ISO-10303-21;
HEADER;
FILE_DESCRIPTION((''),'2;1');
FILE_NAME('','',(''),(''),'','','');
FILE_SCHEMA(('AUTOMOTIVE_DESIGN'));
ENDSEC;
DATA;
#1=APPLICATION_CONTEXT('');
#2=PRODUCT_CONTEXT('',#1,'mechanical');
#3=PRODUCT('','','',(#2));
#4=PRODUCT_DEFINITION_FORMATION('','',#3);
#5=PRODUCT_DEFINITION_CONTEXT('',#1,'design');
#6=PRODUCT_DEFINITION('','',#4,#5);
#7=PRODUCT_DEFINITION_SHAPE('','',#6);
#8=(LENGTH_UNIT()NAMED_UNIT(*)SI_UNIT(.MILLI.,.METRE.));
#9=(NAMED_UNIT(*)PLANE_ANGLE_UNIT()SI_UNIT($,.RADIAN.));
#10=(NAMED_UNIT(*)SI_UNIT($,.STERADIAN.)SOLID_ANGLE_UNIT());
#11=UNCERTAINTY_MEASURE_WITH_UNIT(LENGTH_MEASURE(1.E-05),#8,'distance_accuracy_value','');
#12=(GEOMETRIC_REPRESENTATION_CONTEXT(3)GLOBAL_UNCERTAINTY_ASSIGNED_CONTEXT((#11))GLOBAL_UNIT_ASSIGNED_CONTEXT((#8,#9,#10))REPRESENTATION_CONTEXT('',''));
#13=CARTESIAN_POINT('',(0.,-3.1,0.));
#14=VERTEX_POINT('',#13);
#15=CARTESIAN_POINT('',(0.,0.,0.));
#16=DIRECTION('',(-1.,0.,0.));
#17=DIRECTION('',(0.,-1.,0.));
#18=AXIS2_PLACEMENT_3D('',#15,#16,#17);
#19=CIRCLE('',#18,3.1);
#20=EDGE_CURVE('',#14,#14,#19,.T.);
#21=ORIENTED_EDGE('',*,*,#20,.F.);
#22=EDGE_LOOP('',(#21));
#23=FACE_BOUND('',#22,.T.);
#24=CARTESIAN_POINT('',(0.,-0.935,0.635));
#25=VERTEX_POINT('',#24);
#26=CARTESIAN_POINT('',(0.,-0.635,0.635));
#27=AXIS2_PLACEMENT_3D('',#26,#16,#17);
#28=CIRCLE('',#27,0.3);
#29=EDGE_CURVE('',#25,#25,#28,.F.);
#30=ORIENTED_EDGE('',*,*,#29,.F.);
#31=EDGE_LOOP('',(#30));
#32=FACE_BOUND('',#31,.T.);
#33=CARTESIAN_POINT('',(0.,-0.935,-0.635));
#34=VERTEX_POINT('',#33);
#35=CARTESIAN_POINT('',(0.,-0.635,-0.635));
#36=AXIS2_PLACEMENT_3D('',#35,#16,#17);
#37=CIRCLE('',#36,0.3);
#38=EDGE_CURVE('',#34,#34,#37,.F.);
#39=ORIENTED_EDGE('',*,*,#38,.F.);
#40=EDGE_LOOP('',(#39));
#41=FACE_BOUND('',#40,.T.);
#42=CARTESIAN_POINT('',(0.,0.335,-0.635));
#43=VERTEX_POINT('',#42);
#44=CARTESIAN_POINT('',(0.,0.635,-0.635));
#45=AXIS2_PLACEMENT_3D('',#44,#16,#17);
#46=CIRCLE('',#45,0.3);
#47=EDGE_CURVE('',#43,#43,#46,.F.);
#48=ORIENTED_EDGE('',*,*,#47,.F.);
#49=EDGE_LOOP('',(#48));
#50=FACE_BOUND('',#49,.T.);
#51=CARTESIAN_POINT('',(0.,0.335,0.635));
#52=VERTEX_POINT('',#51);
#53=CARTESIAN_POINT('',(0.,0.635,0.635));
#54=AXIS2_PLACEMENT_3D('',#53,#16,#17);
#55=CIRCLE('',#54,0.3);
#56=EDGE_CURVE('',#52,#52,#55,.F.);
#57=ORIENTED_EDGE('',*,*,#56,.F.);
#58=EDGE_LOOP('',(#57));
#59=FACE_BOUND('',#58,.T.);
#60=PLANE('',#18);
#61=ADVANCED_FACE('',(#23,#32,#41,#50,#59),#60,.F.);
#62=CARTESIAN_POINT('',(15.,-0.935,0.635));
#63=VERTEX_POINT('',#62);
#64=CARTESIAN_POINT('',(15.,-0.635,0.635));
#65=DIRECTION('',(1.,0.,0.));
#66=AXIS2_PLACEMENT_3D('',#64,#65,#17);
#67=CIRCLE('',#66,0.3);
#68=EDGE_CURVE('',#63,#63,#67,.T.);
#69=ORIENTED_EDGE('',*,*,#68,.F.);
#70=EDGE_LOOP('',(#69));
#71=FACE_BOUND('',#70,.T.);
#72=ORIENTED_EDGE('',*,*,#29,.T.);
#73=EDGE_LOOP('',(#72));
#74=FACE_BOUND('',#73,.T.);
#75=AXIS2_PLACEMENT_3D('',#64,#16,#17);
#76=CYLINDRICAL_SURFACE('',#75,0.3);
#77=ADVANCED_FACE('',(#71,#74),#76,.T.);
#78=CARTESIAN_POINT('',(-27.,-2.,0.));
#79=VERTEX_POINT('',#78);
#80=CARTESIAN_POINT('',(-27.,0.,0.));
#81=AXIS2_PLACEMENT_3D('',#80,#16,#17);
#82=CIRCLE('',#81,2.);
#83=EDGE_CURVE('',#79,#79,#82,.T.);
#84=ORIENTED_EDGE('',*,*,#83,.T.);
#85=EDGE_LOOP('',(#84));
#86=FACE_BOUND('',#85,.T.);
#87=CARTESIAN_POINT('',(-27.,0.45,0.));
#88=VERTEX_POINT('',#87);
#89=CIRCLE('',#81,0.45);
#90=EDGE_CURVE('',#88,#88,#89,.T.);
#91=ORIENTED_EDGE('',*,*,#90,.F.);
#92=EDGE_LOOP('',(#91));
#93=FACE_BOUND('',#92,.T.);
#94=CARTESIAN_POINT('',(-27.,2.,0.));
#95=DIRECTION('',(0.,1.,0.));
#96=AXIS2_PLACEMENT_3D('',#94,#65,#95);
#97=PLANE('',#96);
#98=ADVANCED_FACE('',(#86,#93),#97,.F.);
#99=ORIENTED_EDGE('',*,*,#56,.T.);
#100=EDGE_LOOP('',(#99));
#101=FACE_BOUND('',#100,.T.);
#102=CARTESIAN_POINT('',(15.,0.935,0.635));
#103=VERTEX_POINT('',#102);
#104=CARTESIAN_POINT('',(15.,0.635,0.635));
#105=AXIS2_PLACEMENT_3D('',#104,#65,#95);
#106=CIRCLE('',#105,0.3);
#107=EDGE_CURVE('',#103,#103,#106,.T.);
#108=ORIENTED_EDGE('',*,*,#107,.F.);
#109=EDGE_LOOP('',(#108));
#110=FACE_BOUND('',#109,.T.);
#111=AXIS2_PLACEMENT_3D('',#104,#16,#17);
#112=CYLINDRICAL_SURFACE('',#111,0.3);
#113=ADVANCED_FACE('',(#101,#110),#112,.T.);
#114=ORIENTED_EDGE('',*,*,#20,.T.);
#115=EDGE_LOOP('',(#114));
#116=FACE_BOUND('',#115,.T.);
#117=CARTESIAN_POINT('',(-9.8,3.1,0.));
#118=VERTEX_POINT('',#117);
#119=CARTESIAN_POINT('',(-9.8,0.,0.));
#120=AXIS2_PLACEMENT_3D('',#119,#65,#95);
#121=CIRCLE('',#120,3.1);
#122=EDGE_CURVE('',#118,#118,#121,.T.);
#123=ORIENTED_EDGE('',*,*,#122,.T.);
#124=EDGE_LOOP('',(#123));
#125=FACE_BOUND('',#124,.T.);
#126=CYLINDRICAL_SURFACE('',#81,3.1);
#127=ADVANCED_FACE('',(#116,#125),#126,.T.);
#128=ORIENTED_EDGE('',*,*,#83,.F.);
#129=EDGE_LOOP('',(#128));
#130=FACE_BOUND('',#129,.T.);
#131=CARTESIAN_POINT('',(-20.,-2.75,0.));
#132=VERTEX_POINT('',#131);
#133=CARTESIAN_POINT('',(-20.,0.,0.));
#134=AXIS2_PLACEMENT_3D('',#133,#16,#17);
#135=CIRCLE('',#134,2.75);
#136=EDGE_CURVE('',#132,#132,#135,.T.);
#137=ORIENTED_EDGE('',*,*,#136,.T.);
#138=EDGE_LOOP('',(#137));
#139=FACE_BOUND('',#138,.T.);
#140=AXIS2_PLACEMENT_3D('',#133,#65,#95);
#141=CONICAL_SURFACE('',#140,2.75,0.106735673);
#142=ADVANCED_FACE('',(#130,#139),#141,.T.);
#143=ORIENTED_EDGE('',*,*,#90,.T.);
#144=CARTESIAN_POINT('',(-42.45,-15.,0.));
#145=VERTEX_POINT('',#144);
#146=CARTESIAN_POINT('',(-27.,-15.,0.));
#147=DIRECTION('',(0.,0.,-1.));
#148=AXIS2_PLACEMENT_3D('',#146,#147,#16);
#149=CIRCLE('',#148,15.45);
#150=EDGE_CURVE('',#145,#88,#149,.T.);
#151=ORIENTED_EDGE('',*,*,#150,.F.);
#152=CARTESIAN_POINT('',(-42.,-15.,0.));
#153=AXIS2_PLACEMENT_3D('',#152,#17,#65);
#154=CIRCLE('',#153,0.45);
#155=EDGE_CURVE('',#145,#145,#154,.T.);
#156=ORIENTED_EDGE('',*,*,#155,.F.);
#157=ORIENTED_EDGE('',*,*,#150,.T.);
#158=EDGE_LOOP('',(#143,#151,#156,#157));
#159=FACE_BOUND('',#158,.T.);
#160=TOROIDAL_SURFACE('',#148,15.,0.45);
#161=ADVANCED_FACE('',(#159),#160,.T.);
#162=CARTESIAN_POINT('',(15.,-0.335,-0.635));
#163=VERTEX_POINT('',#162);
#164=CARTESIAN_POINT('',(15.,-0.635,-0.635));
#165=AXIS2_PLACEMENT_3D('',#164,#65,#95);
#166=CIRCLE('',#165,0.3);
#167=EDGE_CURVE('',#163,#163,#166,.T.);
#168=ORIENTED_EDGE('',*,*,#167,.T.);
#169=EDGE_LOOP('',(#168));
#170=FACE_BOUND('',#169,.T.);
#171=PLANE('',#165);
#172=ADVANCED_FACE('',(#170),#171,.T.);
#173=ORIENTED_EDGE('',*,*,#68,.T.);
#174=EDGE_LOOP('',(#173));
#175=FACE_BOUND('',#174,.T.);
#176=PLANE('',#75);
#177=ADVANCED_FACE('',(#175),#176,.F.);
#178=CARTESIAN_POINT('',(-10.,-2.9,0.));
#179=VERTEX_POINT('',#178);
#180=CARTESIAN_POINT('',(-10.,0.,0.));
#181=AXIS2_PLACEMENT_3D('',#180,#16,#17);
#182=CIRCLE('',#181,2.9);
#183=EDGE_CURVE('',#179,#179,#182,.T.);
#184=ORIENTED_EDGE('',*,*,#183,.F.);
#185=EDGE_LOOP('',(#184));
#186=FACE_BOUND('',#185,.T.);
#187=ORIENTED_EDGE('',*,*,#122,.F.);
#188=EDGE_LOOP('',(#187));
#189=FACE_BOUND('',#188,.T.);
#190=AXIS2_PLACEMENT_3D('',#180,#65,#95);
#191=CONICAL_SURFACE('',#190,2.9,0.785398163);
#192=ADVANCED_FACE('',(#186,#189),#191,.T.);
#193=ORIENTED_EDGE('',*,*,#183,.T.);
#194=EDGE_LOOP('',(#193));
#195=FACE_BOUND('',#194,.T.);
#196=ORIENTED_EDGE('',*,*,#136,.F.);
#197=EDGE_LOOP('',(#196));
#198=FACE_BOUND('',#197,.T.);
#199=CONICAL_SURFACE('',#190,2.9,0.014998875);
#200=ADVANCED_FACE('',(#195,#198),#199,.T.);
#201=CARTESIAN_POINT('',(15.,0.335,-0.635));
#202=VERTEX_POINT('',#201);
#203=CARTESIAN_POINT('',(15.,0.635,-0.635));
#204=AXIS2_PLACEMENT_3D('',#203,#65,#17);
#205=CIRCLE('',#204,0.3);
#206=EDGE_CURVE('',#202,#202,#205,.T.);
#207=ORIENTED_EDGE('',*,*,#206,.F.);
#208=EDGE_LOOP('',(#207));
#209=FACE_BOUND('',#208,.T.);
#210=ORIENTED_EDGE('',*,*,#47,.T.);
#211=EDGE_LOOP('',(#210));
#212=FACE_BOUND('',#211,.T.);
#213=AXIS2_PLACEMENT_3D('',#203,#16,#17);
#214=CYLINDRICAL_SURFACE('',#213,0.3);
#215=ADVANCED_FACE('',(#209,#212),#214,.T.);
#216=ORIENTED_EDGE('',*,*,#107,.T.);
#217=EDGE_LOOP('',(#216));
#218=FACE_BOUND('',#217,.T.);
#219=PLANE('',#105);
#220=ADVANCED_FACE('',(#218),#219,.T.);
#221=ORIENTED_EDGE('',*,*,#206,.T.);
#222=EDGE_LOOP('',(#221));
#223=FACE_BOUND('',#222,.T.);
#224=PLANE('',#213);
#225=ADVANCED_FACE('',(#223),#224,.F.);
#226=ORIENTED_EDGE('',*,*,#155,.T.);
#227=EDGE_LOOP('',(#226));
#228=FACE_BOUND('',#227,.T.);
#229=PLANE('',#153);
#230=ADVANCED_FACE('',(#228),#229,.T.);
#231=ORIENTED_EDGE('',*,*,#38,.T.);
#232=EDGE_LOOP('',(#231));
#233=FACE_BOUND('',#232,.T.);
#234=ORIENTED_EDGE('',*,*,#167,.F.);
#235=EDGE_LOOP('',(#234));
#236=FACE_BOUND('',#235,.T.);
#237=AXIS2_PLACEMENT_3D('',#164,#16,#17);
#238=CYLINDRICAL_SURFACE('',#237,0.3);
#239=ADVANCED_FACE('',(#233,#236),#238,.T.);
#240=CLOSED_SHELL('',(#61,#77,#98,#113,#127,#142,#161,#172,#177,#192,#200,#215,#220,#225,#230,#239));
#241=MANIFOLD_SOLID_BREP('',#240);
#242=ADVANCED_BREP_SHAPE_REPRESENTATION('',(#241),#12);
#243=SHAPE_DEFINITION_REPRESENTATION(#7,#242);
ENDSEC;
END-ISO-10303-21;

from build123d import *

# Parameters (mm, degrees)
CHAMFER_1_SIZE  = 0.2
SKETCH_4_R      = 0.45
SKETCH_5_R      = 0.3
EXTRUDE_2_DEPTH = 15


with BuildPart() as part:
    # 旋转2: read off the stored shape, not the designer's step
    # 旋转2 outline → 旋转2 (revolve)
    with BuildSketch(Plane.YX):
        Polygon((3.1, 0), (0, 0), (0, -27), (2, -27), (2.75, -20), (2.9, -10), (3.1, -10), align=None)
    revolve(axis=Axis((0, 0, 0), (1, 0, 0)))

    # 倒角1
    chamfer_1_edges = [part.edges().sort_by_distance(p)[0] for p in [
        (-10, -3.1, 0),
    ]]
    chamfer(chamfer_1_edges, length=CHAMFER_1_SIZE - 0.0001)  # a hair under: the kernel refuses the full size

    # 扫描1: sweep along a path in 草图3
    with BuildLine(Plane.XY) as sweep_1_path:
        ThreePointArc((-27, 0), (-37.606601718, -4.393398282), (-42, -15))
    # 草图4 → 扫描1 (sweep)
    with BuildSketch(Plane.ZY.offset(27)):
        Circle(SKETCH_4_R)
    sweep(path=sweep_1_path.line)

    # 草图5 → 拉伸2 (add)
    with BuildSketch(Plane(origin=(0, 0, 0), x_dir=(0, 0, -1), z_dir=(1, 0, 0))):
        with Locations(Location((-0.635, 0.635, 0), (0, 0, 270))):
            Circle(SKETCH_5_R)
        with Locations(Location((-0.635, -0.635, 0), (0, 0, 270))):
            Circle(SKETCH_5_R)
        with Locations(Location((0.635, 0.635, 0), (0, 0, 270))):
            Circle(SKETCH_5_R)
        with Locations(Location((0.635, -0.635, 0), (0, 0, 270))):
            Circle(SKETCH_5_R)
    extrude(amount=EXTRUDE_2_DEPTH)


solid = part.part
